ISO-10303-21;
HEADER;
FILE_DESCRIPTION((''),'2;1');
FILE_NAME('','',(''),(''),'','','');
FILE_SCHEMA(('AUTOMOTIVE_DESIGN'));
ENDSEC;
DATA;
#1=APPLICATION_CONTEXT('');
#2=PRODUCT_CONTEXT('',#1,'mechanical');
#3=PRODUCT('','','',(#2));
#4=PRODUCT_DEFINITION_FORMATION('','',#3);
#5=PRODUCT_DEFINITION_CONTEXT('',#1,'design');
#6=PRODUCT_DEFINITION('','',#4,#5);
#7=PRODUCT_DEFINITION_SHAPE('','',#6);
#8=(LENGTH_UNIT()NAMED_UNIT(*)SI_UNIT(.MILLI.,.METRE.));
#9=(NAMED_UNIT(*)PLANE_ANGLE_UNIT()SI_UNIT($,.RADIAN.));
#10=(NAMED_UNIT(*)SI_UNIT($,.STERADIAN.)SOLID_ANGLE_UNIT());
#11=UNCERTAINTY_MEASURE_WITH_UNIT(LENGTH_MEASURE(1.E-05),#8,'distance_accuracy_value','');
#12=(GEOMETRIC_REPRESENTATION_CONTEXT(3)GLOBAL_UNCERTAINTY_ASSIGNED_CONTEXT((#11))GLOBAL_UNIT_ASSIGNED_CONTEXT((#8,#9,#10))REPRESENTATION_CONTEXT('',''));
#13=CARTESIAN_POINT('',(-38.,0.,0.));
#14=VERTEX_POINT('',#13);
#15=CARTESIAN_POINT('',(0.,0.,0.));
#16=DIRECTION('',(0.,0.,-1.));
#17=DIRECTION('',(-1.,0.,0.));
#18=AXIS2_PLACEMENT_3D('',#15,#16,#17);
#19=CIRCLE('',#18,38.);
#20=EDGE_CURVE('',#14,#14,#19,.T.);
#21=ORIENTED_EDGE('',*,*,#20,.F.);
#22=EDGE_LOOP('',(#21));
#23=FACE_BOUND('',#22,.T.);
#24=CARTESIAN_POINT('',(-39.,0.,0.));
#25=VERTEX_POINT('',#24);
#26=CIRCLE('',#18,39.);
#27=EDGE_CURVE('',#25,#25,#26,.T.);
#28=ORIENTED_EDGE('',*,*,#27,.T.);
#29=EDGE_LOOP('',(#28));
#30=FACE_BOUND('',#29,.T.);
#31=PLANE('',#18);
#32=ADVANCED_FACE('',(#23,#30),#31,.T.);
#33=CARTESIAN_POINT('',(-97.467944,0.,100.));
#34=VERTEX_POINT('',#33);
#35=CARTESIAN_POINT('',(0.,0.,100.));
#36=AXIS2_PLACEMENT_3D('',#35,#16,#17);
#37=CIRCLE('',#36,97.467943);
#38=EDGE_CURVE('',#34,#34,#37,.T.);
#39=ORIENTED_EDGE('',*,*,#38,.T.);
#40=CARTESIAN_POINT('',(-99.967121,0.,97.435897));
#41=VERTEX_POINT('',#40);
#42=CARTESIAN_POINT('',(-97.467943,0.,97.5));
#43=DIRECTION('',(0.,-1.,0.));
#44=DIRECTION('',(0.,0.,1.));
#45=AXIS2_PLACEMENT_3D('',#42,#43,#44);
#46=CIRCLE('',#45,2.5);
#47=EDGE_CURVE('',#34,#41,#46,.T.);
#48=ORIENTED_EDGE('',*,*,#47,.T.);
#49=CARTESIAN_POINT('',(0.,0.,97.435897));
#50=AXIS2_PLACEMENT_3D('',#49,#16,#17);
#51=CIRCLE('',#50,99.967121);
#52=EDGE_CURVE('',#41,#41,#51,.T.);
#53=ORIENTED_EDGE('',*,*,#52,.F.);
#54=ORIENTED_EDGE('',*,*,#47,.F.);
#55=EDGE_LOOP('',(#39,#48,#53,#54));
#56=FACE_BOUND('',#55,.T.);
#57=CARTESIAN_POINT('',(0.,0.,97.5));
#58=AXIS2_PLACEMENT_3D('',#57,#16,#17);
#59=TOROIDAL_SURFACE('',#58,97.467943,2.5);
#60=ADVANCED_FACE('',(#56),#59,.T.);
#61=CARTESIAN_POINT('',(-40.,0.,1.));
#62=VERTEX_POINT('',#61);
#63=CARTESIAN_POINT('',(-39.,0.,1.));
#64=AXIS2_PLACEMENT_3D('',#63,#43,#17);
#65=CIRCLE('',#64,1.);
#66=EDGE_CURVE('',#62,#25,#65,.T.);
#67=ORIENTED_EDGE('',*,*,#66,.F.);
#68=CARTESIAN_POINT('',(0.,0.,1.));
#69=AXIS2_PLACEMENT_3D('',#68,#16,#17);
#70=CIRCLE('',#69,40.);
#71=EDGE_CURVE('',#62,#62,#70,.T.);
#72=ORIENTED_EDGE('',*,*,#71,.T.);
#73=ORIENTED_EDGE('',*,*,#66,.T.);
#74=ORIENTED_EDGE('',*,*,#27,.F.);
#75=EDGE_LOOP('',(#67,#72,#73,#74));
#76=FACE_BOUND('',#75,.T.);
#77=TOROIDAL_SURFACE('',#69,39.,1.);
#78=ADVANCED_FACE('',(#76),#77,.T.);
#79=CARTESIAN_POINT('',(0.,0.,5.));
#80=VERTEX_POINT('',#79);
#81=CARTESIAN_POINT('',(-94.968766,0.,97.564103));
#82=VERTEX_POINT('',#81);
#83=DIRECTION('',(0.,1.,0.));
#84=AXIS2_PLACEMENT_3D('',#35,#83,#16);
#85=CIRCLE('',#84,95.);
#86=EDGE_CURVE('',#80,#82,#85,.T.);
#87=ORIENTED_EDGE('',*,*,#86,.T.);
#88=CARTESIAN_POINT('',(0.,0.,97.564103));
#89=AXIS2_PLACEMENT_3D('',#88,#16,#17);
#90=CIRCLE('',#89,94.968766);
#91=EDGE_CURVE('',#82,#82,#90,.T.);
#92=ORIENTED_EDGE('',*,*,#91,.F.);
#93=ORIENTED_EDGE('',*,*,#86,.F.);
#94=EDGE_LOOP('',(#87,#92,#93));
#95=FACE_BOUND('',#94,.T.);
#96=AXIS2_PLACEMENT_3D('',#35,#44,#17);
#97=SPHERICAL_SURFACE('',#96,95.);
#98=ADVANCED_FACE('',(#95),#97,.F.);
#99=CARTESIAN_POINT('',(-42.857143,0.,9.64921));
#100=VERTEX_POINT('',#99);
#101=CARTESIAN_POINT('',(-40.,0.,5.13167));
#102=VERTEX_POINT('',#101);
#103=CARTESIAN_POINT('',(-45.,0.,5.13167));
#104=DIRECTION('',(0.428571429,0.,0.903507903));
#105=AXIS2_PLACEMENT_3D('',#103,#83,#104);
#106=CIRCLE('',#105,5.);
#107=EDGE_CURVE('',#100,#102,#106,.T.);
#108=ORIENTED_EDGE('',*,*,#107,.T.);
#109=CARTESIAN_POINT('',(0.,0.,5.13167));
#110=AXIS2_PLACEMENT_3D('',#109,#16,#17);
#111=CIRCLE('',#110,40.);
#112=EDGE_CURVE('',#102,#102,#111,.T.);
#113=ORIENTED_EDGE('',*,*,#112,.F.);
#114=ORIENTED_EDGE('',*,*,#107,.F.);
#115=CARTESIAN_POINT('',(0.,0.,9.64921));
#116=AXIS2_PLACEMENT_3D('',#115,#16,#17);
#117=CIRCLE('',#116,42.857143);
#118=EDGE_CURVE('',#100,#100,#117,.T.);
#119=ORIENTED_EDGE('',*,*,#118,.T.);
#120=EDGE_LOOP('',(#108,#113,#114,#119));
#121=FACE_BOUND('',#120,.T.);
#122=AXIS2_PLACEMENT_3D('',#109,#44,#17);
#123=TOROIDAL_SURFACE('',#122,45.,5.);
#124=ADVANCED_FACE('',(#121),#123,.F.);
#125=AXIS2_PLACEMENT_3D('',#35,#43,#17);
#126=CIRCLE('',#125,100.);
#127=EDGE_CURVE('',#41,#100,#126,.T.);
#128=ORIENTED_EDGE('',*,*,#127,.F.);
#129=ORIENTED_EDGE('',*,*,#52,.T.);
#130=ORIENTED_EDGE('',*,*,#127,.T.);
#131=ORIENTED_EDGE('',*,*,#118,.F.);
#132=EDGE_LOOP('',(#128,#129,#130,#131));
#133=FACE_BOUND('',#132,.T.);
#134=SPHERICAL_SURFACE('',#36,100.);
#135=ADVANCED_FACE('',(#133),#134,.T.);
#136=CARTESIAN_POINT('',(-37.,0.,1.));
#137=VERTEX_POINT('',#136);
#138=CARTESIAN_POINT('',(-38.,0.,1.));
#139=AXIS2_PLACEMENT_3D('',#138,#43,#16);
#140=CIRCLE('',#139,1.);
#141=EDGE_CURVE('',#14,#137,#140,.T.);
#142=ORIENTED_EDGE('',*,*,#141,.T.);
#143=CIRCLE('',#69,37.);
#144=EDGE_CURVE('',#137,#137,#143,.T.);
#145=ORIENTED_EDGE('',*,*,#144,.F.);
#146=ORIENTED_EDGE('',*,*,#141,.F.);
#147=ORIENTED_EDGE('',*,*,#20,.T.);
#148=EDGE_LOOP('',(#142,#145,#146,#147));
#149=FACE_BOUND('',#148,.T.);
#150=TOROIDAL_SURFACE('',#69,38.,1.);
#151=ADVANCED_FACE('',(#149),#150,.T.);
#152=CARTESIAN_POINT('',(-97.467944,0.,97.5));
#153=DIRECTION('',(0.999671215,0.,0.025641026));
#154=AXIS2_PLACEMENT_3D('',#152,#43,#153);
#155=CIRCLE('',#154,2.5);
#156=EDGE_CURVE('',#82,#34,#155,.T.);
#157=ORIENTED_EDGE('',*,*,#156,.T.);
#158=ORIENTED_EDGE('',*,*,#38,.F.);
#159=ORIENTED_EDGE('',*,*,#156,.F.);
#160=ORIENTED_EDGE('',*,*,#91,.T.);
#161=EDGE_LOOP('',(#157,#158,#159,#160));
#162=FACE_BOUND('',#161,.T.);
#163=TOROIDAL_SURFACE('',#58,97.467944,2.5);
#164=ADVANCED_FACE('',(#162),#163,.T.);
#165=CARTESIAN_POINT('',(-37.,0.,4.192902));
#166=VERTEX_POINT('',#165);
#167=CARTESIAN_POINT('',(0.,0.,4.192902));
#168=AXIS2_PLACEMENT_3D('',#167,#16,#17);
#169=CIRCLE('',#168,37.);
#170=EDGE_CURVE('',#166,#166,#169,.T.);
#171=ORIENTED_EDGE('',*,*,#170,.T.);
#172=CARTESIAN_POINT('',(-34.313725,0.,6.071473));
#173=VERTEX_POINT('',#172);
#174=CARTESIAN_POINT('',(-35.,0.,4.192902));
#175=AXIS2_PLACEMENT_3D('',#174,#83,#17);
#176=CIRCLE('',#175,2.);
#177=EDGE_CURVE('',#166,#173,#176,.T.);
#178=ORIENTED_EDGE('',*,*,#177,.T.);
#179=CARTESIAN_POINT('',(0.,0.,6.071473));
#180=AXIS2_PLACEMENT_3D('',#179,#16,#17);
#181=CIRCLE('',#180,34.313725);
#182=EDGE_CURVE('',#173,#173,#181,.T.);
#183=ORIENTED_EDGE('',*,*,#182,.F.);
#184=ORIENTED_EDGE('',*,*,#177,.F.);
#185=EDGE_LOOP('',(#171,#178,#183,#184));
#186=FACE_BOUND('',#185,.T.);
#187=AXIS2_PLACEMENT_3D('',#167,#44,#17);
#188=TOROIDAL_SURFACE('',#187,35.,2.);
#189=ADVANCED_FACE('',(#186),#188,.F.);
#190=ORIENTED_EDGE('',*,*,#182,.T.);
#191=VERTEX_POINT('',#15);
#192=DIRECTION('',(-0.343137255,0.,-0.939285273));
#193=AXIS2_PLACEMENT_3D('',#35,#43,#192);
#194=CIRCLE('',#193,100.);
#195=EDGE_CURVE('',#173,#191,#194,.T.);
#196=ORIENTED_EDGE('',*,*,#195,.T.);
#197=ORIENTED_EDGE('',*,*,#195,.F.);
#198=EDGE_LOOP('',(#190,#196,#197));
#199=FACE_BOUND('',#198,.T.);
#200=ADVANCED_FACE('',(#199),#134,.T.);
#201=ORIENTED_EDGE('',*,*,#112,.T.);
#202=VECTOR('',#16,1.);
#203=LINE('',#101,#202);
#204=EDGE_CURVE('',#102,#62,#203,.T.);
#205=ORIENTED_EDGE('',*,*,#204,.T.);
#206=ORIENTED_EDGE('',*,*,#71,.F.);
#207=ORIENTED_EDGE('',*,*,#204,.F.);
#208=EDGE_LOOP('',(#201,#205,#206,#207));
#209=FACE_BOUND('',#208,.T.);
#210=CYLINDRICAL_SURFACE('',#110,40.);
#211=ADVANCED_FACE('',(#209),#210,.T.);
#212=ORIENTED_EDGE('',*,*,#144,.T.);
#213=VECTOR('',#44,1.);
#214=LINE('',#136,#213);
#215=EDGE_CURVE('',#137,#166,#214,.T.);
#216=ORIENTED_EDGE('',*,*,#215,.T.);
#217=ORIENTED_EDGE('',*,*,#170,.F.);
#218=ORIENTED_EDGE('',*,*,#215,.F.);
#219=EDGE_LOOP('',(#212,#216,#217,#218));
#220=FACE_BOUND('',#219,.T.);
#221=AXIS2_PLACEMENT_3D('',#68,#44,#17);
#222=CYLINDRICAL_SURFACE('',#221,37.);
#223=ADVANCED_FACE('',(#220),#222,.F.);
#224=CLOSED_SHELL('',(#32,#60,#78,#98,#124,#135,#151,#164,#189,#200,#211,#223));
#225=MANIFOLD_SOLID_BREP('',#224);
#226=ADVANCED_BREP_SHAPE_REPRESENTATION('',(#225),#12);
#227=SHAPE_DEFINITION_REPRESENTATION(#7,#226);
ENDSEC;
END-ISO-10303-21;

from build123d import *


# Not quite as in the source:
# - a fillet or chamfer that OpenCascade refuses, or shapes differently, is made with other operations: its cross-section is extruded or revolved along the edge and cut away or added


with BuildPart() as f1:
    # F0 (on Front) → F1 (revolve)
    with BuildSketch(Plane.XZ):
        with BuildLine():
            Line((-95.0000001118, 100), (-100, 100))
            ThreePointArc((-100, 100), (-84.5154254729, 46.5477516175), (-42.8571428571, 9.6492097095))
            ThreePointArc((-42.8571428571, 9.6492097095), (-40.7742287264, 7.8042826141), (-40, 5.1316701949))
            Line((-40, 5.1316701949), (-40, 1))
            ThreePointArc((-40, 1), (-39.7071067812, 0.2928932188), (-39, 0))
            Line((-39, 0), (-38, 0))
            ThreePointArc((-38, 0), (-37.2928932188, 0.2928932188), (-37, 1))
            Line((-37, 1), (-37, 4.1929021419))
            ThreePointArc((-37, 4.1929021419), (-36.1461786467, 5.8318879593), (-34.3137254902, 6.0714726881))
            ThreePointArc((-34.3137254902, 6.0714726881), (-17.4233646121, 1.5295660333), (0, 0))
            Line((0, 0), (0, 4.9999998882))
            ThreePointArc((0, 4.9999998882), (-67.1751442917, 32.8248557083), (-95.0000001118, 100))
        make_face()
    revolve(axis=Axis((0, 0, 2.4999999441), (0, 0, -1)))

    # F2: fillet of radius 2.5 on 2 edges, made by hand

    # F2_s1 → F2_t2 (revolve, cut)
    with BuildSketch(Plane.XZ):
        with BuildLine():
            ThreePointArc((-97.4679434481, 100), (-99.2582306332, 99.2449561011), (-99.9671214852, 97.4358974359))
            ThreePointArc((-99.9671214852, 97.4358974359), (-99.9917800335, 98.7178433251), (-100, 100))
            Line((-100, 100), (-97.4679434481, 100))
        make_face()
    revolve(axis=Axis((0, 0, 100), (0, 0, -1)), mode=Mode.SUBTRACT)

    # F2_s3 → F2_t4 (revolve, cut)
    with BuildSketch(Plane.XZ):
        with BuildLine():
            ThreePointArc((-94.9687655228, 97.564102564), (-95.7229874587, 99.2902871851), (-97.4679435599, 100))
            Line((-97.4679435599, 100), (-95.0000001118, 100))
            ThreePointArc((-95.0000001118, 100), (-94.9921911436, 98.7819511588), (-94.9687655228, 97.564102564))
        make_face()
    revolve(axis=Axis((0, 0, 100), (0, 0, -1)), mode=Mode.SUBTRACT)


solid = f1.part
